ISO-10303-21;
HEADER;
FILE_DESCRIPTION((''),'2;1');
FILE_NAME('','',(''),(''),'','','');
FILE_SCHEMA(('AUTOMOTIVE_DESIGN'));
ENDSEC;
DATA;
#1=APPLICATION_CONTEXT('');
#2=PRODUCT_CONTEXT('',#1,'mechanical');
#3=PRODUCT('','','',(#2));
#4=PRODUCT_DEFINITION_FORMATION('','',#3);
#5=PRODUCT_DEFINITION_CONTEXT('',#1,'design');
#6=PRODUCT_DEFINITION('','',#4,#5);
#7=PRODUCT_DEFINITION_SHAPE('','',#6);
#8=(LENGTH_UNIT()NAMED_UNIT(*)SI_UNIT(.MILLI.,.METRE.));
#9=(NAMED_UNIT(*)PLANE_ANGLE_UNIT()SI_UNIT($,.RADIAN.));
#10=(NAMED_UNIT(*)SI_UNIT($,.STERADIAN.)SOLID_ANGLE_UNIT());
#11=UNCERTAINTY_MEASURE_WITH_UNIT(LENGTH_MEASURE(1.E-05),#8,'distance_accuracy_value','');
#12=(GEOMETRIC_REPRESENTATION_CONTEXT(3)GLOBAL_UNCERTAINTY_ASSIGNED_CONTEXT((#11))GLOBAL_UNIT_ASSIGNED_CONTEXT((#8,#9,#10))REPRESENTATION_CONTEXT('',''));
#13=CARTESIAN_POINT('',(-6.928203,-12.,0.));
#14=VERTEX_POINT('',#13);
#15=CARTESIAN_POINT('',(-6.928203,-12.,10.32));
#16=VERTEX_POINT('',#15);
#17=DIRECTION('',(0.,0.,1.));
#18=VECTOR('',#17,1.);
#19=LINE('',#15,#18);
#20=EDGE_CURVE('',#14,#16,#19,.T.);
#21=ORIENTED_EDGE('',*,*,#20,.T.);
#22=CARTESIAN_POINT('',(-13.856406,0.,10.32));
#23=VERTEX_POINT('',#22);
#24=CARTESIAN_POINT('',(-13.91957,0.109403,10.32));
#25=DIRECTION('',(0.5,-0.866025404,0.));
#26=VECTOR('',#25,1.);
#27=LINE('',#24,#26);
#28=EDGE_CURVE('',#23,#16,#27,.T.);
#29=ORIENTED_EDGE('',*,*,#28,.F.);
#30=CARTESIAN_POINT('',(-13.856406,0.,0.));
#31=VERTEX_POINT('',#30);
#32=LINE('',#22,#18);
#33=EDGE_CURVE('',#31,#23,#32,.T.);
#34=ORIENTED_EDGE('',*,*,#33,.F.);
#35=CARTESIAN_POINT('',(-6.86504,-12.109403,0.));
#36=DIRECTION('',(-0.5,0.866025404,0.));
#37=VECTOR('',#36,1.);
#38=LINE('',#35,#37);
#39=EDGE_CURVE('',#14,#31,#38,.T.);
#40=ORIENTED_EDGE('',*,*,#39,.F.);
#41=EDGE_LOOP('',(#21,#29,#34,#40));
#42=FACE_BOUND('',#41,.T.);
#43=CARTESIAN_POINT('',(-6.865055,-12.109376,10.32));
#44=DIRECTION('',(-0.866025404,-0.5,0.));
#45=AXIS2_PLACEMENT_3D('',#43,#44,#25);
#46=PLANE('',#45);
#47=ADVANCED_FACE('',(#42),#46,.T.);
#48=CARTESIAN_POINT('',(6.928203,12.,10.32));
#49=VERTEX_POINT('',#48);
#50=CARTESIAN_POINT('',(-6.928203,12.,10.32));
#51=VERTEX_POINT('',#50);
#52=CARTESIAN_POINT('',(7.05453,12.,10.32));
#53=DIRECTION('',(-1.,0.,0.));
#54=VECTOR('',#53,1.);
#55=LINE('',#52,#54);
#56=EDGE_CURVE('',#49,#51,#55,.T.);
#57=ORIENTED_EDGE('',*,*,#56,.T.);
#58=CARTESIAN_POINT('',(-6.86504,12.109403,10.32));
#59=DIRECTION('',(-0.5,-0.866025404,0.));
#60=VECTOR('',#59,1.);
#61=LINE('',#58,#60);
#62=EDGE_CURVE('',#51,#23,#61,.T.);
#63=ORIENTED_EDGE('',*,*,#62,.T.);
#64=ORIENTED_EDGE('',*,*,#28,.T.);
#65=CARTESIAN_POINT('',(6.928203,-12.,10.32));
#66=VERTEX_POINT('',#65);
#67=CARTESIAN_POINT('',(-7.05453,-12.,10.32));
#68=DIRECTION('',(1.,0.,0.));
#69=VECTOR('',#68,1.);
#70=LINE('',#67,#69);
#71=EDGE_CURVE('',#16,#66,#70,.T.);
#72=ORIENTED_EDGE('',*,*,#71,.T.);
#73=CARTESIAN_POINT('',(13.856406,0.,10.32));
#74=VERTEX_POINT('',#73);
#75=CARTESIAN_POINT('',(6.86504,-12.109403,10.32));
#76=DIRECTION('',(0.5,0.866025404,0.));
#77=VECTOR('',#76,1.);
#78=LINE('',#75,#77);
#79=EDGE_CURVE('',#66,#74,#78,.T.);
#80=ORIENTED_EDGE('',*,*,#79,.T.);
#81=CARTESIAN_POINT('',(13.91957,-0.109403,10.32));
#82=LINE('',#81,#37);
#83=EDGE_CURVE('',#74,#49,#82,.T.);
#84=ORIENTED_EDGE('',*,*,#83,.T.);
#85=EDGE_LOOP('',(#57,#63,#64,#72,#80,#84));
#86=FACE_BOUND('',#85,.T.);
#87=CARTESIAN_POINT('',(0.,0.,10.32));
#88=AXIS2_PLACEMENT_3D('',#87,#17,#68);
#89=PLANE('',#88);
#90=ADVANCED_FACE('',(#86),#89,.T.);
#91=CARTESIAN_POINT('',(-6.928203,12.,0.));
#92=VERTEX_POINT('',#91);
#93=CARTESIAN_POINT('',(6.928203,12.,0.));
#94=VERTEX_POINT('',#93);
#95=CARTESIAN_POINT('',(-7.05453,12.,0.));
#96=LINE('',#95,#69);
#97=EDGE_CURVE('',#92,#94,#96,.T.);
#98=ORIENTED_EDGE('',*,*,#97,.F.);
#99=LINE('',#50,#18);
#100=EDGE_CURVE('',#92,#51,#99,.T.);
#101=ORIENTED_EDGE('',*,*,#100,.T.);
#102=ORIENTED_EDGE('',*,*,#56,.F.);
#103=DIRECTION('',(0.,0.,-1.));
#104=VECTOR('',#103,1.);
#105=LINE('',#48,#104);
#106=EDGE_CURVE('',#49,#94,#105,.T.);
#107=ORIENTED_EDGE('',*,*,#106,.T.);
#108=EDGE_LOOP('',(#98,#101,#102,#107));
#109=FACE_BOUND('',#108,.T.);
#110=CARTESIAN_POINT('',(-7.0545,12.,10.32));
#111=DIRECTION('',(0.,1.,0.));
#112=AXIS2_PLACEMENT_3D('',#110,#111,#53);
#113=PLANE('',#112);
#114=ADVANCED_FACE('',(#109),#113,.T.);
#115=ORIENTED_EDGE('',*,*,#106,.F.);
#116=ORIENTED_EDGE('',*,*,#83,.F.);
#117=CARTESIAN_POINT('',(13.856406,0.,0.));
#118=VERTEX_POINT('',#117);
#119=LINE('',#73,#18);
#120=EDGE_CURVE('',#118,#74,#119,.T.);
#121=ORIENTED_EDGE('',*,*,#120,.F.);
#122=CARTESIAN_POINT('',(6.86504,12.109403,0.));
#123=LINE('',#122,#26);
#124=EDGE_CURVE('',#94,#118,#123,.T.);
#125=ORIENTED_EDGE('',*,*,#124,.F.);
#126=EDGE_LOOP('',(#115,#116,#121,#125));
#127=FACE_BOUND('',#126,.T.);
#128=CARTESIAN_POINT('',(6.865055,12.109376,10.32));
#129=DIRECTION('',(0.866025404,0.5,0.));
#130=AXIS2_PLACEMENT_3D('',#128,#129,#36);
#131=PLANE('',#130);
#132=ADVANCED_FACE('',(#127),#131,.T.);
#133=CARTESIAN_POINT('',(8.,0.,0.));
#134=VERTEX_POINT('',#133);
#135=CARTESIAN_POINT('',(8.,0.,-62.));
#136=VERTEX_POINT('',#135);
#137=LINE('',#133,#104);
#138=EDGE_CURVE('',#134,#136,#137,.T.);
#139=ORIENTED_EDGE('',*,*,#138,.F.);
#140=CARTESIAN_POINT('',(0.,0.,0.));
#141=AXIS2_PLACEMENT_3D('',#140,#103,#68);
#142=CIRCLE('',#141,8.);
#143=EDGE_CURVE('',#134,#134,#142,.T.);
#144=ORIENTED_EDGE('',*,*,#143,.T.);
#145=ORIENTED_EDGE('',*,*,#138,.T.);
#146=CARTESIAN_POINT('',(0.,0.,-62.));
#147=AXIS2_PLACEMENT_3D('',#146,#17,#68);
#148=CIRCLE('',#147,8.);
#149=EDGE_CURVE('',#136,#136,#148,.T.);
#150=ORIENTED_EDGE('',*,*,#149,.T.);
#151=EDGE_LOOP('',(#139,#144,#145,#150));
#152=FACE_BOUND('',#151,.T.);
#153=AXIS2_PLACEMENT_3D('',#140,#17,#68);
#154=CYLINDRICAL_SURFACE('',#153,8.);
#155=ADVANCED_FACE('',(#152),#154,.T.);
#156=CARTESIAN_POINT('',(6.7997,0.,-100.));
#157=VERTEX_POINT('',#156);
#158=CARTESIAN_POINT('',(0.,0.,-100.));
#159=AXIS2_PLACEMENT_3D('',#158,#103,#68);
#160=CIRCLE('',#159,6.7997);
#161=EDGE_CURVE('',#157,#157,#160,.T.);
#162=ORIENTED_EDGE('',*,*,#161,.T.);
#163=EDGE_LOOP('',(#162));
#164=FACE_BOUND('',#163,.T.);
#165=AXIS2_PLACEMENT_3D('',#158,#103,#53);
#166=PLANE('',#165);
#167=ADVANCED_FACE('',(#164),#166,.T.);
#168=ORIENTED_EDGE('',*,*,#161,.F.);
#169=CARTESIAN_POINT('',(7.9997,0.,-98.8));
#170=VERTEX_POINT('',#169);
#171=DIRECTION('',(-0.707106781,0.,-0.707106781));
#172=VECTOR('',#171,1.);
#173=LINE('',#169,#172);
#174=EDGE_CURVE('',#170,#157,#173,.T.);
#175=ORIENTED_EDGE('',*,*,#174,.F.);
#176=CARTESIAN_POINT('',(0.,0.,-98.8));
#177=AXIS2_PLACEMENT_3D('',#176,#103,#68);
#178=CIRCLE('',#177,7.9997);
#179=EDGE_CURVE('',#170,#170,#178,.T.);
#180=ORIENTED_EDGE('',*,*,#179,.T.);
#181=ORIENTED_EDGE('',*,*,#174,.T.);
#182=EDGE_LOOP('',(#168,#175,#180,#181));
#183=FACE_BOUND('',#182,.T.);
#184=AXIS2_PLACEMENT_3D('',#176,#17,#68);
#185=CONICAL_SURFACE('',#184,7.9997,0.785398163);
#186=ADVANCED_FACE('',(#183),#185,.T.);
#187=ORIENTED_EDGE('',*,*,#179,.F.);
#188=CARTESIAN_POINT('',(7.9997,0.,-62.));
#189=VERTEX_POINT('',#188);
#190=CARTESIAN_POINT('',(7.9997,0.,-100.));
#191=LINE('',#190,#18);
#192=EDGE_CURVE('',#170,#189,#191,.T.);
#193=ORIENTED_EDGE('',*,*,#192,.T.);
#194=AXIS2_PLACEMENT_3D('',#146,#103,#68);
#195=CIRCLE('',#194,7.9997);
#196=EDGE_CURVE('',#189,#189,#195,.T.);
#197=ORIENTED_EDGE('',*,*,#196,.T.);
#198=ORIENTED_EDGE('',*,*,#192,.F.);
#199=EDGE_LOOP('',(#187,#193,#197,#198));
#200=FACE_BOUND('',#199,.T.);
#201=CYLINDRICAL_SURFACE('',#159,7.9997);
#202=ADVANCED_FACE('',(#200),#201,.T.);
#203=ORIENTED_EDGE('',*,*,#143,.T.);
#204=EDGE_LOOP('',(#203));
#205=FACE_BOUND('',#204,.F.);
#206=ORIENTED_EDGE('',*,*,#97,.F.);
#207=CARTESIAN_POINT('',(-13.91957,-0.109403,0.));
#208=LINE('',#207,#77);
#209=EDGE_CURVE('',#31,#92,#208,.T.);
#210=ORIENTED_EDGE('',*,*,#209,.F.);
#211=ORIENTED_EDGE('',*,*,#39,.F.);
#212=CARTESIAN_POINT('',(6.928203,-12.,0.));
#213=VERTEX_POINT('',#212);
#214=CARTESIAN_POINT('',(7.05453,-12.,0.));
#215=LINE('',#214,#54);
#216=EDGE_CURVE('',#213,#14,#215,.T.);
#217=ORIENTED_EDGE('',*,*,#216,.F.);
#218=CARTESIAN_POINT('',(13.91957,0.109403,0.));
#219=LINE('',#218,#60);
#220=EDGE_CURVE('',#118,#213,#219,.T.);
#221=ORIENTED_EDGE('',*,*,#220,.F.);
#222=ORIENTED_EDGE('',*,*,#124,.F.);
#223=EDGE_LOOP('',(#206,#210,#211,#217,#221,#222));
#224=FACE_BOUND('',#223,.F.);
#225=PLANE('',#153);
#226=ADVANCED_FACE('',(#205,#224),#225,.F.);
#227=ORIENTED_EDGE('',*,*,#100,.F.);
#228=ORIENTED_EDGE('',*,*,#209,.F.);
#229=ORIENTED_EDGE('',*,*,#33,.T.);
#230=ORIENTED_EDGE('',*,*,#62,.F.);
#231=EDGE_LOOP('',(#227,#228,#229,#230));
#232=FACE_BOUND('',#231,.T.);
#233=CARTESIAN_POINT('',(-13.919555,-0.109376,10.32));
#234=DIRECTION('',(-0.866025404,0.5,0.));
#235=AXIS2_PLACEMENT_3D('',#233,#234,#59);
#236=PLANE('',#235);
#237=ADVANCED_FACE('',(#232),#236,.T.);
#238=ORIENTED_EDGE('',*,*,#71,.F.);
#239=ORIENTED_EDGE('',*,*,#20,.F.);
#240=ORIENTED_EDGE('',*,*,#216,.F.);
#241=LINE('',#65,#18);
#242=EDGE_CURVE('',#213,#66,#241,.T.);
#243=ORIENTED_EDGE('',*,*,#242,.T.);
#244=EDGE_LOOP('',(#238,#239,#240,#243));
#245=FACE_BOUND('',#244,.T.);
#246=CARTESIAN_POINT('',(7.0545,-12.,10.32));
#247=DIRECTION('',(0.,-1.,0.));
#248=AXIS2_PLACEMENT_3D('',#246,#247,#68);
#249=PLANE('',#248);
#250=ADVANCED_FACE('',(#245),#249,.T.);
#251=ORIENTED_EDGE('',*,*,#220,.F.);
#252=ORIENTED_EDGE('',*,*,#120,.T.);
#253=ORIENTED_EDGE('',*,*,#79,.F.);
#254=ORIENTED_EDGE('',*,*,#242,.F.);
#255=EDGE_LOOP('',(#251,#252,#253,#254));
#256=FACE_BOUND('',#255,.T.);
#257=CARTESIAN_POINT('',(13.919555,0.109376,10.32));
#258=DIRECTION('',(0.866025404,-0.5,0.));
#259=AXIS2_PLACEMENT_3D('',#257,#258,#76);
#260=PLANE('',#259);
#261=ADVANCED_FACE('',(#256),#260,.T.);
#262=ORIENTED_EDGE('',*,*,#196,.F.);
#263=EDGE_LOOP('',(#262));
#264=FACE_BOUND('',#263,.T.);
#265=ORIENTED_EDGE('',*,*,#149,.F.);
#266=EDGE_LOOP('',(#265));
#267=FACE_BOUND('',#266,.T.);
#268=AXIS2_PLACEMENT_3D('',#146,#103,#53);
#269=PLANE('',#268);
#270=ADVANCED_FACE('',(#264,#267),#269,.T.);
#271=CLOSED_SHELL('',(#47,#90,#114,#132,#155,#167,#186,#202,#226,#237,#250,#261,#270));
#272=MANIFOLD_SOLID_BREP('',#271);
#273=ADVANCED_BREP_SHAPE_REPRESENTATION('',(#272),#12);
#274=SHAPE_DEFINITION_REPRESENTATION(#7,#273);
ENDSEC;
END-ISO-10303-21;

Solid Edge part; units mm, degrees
sketch "Sketch1" plane through (0, 0, 0) normal (0, 0, 1) x (1, 0, 0)
  circle A0 centre (0, 0) radius 13.92
  dimension "D1" = 27.84
extrude "Protrusion1" add sketch "Sketch1" along normal blind 10.32
sketch "Sketch2" plane through (0, 0, 0) normal (0, 0, -1) x (1, 0, 0)
  circle A0 centre (0, 0) radius 8
extrude "Protrusion2" add sketch "Sketch2" along normal blind 100
sketch "Sketch3" plane through (0, 0, -100) normal (0, 0, -1) x (1, 0, 0)
  circle A0 centre (0, 0) radius 7.9997
extrude "Cutout1" cut sketch "Sketch3" against normal blind 38 flip side to cut
chamfer "Chamfer_1" distance 1.2 angle 45 1 edges at (-7.9997, 0, -100)
sketch "Sketch4" plane through (0, 0, 10.32) normal (0, 0, 1) x (1, 0, 0)
  line L0 (-7.0545, 12) -> (7.0545, 12)
  dimension "D1" = 24
extrude "Cutout2" cut sketch "Sketch4" against normal up to next material side at (0, 12.05, 10.32)
pattern_circular "Pattern1" count 6 over 360 about axis through (0, 0, 10.32) along (0, 0, 1) of "Cutout2"
properties part number "24104518"
